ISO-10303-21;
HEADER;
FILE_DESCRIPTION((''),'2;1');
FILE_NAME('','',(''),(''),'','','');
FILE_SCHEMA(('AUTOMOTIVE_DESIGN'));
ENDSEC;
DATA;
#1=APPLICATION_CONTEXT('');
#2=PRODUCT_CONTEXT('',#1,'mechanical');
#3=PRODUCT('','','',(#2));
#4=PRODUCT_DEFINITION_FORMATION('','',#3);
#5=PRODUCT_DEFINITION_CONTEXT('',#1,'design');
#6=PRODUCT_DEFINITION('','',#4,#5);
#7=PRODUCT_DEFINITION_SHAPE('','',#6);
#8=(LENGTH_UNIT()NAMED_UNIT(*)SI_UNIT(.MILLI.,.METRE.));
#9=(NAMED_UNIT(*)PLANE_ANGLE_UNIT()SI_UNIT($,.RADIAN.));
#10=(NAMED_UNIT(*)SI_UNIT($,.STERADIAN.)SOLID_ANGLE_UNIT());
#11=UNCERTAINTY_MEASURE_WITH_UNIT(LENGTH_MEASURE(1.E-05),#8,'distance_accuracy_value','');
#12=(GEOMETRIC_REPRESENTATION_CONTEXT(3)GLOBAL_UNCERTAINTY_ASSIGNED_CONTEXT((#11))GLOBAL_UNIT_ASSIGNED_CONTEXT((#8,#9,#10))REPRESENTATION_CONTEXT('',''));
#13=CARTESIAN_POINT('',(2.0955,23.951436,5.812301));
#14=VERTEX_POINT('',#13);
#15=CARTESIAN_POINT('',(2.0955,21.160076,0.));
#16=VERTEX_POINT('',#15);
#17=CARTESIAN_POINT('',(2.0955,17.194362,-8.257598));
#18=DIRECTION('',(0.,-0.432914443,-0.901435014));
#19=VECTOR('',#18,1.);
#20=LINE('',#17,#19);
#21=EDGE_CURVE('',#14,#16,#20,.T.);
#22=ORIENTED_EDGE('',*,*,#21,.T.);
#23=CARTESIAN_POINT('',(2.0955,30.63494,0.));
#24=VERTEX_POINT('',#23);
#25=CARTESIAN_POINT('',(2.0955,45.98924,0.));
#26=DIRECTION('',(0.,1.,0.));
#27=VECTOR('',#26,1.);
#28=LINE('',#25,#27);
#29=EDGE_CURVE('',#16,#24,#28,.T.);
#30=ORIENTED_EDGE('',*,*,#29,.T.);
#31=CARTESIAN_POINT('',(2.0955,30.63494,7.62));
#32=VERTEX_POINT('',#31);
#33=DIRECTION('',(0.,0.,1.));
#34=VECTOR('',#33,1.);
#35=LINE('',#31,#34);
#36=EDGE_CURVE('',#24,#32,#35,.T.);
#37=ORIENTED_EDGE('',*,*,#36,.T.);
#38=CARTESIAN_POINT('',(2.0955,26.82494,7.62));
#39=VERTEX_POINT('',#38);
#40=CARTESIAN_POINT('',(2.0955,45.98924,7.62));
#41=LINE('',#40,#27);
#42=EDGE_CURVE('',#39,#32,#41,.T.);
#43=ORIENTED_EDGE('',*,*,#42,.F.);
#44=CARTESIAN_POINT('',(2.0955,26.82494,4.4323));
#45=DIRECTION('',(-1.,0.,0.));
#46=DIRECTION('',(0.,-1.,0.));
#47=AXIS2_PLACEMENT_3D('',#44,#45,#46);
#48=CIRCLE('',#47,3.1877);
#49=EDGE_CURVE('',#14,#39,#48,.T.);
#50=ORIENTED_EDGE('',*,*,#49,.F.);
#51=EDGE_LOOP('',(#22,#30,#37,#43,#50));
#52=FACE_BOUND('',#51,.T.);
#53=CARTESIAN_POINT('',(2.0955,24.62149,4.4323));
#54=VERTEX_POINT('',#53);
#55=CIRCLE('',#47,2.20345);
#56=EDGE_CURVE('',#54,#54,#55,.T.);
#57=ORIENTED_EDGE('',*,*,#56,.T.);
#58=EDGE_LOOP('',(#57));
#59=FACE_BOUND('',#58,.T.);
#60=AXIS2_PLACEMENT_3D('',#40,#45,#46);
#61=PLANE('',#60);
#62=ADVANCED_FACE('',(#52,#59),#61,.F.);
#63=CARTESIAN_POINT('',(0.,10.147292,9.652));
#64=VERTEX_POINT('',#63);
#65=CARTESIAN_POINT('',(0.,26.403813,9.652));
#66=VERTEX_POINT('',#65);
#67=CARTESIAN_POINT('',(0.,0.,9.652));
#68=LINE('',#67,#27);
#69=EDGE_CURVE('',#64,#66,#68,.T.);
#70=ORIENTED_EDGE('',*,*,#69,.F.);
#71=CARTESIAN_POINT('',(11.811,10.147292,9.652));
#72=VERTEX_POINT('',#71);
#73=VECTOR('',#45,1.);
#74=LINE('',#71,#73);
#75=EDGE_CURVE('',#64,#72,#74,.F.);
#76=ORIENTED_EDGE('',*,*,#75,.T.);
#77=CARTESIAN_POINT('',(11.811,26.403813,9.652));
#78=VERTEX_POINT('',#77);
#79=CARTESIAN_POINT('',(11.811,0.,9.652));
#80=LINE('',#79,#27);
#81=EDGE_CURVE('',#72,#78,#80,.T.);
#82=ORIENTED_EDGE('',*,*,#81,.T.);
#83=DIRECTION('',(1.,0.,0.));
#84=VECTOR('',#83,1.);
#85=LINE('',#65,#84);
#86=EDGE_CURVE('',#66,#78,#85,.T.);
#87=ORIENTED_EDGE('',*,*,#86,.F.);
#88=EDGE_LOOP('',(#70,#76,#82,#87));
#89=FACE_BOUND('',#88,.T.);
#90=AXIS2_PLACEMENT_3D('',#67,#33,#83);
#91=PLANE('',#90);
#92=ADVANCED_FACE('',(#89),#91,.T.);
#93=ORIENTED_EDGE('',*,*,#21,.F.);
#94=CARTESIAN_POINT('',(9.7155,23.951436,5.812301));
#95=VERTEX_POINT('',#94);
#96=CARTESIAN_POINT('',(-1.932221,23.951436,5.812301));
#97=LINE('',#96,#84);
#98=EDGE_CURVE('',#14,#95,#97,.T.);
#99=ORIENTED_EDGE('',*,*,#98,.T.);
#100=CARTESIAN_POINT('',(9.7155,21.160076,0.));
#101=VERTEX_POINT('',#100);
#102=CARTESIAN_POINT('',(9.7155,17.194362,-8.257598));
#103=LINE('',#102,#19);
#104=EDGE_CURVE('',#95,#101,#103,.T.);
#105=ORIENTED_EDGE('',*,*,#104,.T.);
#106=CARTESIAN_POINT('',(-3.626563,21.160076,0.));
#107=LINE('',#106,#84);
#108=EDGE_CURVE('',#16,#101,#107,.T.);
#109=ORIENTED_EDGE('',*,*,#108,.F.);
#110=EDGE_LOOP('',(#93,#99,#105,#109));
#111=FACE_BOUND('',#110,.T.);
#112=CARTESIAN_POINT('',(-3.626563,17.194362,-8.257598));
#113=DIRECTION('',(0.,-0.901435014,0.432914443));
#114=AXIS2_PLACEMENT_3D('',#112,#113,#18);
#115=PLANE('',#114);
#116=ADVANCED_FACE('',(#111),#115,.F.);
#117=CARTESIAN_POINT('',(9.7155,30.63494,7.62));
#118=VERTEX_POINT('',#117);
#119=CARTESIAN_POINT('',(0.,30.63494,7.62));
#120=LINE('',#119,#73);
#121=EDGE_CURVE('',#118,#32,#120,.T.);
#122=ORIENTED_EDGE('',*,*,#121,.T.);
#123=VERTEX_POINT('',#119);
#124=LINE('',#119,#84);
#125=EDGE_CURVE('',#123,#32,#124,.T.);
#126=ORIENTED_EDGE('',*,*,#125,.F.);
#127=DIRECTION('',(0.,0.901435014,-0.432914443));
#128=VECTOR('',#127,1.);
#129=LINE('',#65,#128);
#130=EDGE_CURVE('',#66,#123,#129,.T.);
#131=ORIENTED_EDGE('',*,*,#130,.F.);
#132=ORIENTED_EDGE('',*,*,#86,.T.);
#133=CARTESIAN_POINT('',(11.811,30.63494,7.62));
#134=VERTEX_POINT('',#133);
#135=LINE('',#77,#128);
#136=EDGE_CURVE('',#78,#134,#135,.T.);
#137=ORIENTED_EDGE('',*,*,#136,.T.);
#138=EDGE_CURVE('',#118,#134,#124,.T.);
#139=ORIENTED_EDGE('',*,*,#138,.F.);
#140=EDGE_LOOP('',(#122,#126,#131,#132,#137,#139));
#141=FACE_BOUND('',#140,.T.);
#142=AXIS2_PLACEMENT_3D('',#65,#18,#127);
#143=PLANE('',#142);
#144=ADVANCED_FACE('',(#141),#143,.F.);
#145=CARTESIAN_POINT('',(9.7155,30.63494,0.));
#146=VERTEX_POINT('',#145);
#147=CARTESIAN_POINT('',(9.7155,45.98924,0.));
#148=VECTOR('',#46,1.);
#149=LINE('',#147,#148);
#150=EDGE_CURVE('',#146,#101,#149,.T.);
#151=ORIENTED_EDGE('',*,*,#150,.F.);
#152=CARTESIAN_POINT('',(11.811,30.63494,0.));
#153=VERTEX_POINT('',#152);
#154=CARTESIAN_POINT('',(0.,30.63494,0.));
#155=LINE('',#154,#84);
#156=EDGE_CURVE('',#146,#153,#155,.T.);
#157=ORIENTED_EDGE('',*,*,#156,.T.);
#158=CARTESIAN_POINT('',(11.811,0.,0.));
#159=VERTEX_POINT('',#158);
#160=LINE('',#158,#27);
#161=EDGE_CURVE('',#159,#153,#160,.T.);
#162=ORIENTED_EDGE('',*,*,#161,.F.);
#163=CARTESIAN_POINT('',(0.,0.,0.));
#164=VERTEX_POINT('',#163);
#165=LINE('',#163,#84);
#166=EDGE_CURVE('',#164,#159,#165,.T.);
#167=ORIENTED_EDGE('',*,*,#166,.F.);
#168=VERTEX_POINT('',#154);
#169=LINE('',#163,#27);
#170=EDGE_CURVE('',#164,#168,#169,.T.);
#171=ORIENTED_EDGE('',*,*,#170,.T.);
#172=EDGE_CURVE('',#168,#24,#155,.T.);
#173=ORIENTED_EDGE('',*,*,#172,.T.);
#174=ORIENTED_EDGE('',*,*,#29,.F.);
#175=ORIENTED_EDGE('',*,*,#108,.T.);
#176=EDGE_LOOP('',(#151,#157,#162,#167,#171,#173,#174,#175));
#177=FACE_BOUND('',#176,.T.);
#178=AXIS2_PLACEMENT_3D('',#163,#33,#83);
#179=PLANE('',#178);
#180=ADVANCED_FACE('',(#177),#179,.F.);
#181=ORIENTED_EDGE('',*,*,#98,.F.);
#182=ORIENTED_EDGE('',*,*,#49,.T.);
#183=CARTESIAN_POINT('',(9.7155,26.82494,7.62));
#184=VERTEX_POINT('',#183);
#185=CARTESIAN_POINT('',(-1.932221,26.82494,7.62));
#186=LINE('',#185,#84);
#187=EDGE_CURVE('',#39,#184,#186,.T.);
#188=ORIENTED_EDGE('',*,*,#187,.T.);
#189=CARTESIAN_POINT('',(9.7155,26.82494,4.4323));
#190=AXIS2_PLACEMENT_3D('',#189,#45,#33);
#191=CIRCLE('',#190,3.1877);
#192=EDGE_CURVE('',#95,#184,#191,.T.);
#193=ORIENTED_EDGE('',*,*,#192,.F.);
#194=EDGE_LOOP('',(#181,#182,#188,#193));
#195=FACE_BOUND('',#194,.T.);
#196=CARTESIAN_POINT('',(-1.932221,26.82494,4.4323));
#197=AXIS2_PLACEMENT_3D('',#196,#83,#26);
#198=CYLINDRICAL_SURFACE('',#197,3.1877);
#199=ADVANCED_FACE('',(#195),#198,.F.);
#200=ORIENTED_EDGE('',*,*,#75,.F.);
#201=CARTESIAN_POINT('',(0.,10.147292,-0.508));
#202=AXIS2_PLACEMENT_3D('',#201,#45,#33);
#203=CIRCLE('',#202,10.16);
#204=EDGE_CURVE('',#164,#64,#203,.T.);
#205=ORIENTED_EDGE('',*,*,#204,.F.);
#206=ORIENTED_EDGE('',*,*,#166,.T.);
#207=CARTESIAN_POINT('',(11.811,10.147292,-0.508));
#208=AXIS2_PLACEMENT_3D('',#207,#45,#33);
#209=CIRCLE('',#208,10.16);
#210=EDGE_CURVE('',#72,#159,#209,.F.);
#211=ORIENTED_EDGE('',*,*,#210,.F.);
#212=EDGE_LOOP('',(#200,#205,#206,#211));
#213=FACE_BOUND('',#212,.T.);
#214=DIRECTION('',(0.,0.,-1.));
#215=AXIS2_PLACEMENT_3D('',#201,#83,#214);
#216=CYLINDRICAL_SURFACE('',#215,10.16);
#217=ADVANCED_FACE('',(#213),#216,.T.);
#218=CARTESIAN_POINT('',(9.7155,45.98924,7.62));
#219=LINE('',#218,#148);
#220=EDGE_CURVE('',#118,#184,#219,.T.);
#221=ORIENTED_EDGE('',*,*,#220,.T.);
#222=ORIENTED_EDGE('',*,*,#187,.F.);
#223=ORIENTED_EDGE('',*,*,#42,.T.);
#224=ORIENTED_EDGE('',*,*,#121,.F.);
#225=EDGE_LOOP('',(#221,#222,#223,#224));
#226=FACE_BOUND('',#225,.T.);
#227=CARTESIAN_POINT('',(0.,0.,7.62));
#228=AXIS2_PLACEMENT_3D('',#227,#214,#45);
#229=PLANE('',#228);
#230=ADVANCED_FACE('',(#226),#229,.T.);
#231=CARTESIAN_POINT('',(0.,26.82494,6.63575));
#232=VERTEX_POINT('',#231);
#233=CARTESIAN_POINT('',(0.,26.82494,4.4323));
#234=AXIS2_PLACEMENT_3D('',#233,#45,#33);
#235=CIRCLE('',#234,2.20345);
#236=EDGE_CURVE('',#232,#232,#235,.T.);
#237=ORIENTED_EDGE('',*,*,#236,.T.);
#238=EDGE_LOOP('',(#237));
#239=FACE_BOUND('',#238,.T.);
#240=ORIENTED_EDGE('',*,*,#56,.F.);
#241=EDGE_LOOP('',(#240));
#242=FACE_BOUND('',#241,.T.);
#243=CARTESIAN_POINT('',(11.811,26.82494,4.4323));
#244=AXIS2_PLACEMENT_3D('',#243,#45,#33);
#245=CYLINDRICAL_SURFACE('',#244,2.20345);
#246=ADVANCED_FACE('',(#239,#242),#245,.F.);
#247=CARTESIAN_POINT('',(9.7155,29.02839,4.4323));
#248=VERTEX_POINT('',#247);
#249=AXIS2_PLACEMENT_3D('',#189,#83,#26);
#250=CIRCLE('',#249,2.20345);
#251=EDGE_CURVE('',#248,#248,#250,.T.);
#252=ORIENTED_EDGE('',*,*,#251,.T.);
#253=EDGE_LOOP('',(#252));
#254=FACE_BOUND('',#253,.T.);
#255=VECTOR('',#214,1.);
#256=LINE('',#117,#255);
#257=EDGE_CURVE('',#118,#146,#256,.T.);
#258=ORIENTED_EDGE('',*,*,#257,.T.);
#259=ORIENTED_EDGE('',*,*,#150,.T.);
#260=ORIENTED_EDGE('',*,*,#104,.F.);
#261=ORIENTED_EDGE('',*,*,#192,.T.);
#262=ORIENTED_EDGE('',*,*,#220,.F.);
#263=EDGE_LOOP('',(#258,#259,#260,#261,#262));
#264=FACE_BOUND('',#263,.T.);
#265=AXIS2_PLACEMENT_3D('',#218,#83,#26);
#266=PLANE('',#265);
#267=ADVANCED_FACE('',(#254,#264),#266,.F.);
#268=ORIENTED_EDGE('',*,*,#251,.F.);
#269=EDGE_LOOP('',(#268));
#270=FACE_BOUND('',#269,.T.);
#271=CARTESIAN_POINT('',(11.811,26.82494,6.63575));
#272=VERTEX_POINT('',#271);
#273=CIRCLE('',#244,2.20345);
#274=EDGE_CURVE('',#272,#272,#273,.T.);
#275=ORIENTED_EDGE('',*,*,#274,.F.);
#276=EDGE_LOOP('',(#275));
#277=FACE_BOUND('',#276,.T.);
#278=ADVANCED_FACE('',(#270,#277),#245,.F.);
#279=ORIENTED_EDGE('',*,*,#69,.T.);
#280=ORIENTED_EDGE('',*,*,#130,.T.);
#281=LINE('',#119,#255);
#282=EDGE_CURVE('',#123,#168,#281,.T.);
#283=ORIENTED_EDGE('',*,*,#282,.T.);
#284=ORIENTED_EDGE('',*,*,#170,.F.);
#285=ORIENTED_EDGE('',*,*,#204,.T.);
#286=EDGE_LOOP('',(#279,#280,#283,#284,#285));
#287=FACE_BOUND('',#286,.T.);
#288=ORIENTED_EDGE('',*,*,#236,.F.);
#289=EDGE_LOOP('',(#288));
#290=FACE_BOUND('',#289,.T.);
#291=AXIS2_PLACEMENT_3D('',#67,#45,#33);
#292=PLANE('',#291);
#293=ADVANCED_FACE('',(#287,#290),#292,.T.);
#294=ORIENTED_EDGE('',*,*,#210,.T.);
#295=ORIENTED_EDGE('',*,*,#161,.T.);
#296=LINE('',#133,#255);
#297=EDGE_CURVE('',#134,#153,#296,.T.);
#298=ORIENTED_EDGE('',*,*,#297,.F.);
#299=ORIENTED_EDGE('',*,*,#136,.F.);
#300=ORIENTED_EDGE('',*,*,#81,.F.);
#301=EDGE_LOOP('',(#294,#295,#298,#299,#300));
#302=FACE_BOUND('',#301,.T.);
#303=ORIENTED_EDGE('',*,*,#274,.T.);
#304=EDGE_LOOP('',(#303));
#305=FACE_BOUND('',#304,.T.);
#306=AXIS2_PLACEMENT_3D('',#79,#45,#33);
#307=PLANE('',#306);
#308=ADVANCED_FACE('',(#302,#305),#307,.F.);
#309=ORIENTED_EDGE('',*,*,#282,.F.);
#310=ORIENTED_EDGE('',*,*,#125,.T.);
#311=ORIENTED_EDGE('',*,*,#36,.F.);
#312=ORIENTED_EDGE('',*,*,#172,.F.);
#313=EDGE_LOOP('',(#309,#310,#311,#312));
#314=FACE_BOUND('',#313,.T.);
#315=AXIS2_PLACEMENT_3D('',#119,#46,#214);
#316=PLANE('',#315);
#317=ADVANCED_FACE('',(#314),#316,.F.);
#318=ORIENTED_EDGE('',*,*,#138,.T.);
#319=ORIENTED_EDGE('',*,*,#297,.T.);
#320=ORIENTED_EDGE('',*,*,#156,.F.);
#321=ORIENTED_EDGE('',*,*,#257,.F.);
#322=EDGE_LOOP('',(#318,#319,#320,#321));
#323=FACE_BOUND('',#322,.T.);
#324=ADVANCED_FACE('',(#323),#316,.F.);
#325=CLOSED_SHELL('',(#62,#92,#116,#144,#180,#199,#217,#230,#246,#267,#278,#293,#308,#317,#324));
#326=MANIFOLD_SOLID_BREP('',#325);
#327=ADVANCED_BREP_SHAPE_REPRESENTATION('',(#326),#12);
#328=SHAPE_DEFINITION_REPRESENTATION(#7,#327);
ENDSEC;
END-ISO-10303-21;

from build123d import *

# Parameters (mm, degrees)
SKETCH1_W               = 11.811
SKETCH1_H               = 45.98924
BOSS_EXTRUDE1_DEPTH     = 9.652
FILLET5_R               = 4.826
SKETCH2_W               = 7.62
SKETCH2_H               = 22.352
CUT_EXTRUDE1_DEPTH      = 7.62
CUT_EXTRUDE2_DEPTH      = 49.452771033
CUT_EXTRUDE2_DEPTH_BACK = 49.452771033
SKETCH3_R               = 2.20345
FILLET4_R               = 4.826
FILLET6_R               = 10.16
CUT_EXTRUDE3_DEPTH      = 49.452771033
CUT_EXTRUDE4_DEPTH      = 7.62
BOSS_EXTRUDE2_DEPTH     = 7.62


with BuildPart() as part:
    # Sketch1 → Boss-Extrude1 (new body)
    with BuildSketch(Plane.XY):
        with Locations((5.9055, 22.99462)):
            Rectangle(SKETCH1_W, SKETCH1_H)
    extrude(amount=BOSS_EXTRUDE1_DEPTH)

    # Fillet5
    fillet5_edges = [part.edges().sort_by_distance(p)[0] for p in [
        (5.9055, 45.98924, 0),
    ]]
    fillet(fillet5_edges, radius=FILLET5_R)

    # Sketch2 → Cut-Extrude1 (cut)
    with BuildSketch(Plane(origin=(0, 0, 0), x_dir=(-1, 0, 0), z_dir=(0, 0, -1))):
        with Locations((-5.9055, 34.81324)):
            Rectangle(SKETCH2_W, SKETCH2_H)
    extrude(amount=-CUT_EXTRUDE1_DEPTH, mode=Mode.SUBTRACT)

    # Sketch3 → Cut-Extrude2 (cut, two sides: drawn at the far end of the back side and taken through both)
    with BuildSketch(Plane.ZY.offset(-CUT_EXTRUDE2_DEPTH_BACK)):
        with Locations((4.4323, 26.82494)):
            Circle(SKETCH3_R)
    extrude(amount=CUT_EXTRUDE2_DEPTH + CUT_EXTRUDE2_DEPTH_BACK, mode=Mode.SUBTRACT)

    # Fillet4
    # the kernel refuses this fillet: 4.826 mm, written as the material it takes off along each edge
    with BuildSketch(Plane(origin=(23.876, 45.98924, 9.652), x_dir=(0, 0, -1), z_dir=(-1, 0, 0))) as fillet4_piece_1:
        with BuildLine():
            CenterArc((FILLET4_R, FILLET4_R), FILLET4_R, 180, 90)
            Line((0, FILLET4_R), (0, 0))
            Line((0, 0), (FILLET4_R, 0))
        make_face()
    extrude(amount=35.941, mode=Mode.SUBTRACT)

    # Fillet6
    # the kernel refuses this fillet: 10.16 mm, written as the material it takes off along each edge
    with BuildSketch(Plane(origin=(-25.368230131, 0, 9.652), x_dir=(0, 1, 0), z_dir=(1, 0, 0))) as fillet6_piece_1:
        with BuildLine():
            CenterArc((10.147292053, -10.16), FILLET6_R, 90, 87.134016017)
            Line((0, -9.652), (-0.202945841, -9.64184))
            ThreePointArc((-0.202945841, -9.64184), (-0.2032, -4.826), (-0.2032, 0))
            Line((-0.2032, 0), (0, 0.2032))
            Line((0, 0.2032), (10.147292053, 0.2032))
            Line((10.147292053, 0.2032), (10.147292053, 0))
        make_face()
    extrude(amount=62.547460263, mode=Mode.SUBTRACT)

    # Sketch4 → Cut-Extrude3 (cut, through all)
    with BuildSketch(Plane(origin=(11.811, 0, 0), x_dir=(0, 0, -1), z_dir=(1, 0, 0))):
        Polygon((-9.652, 26.403813088), (-7.62, 30.63494), (0, 30.63494), (0, 45.98924), (-9.652, 45.98924), align=None)
    extrude(amount=-CUT_EXTRUDE3_DEPTH, mode=Mode.SUBTRACT)

    # Sketch5 → Cut-Extrude4 (cut)
    with BuildSketch(Plane.ZY.offset(-9.7155)):
        Polygon((0, 21.160076085), (5.158068358, 23.63724), (0, 23.63724), align=None)
    extrude(amount=CUT_EXTRUDE4_DEPTH, mode=Mode.SUBTRACT)

    # Sketch5<3> → Boss-Extrude2 (add)
    with BuildSketch(Plane.ZY.offset(-9.7155)):
        with BuildLine():
            Line((5.812301369, 23.951435604), (5.158068358, 23.63724))
            Line((5.158068358, 23.63724), (7.62, 23.63724))
            Line((7.62, 23.63724), (7.62, 26.82494))
            ThreePointArc((7.62, 26.82494), (7.130490287, 25.127530072), (5.812301369, 23.951435604))
        make_face()
    extrude(amount=BOSS_EXTRUDE2_DEPTH)


solid = part.part
